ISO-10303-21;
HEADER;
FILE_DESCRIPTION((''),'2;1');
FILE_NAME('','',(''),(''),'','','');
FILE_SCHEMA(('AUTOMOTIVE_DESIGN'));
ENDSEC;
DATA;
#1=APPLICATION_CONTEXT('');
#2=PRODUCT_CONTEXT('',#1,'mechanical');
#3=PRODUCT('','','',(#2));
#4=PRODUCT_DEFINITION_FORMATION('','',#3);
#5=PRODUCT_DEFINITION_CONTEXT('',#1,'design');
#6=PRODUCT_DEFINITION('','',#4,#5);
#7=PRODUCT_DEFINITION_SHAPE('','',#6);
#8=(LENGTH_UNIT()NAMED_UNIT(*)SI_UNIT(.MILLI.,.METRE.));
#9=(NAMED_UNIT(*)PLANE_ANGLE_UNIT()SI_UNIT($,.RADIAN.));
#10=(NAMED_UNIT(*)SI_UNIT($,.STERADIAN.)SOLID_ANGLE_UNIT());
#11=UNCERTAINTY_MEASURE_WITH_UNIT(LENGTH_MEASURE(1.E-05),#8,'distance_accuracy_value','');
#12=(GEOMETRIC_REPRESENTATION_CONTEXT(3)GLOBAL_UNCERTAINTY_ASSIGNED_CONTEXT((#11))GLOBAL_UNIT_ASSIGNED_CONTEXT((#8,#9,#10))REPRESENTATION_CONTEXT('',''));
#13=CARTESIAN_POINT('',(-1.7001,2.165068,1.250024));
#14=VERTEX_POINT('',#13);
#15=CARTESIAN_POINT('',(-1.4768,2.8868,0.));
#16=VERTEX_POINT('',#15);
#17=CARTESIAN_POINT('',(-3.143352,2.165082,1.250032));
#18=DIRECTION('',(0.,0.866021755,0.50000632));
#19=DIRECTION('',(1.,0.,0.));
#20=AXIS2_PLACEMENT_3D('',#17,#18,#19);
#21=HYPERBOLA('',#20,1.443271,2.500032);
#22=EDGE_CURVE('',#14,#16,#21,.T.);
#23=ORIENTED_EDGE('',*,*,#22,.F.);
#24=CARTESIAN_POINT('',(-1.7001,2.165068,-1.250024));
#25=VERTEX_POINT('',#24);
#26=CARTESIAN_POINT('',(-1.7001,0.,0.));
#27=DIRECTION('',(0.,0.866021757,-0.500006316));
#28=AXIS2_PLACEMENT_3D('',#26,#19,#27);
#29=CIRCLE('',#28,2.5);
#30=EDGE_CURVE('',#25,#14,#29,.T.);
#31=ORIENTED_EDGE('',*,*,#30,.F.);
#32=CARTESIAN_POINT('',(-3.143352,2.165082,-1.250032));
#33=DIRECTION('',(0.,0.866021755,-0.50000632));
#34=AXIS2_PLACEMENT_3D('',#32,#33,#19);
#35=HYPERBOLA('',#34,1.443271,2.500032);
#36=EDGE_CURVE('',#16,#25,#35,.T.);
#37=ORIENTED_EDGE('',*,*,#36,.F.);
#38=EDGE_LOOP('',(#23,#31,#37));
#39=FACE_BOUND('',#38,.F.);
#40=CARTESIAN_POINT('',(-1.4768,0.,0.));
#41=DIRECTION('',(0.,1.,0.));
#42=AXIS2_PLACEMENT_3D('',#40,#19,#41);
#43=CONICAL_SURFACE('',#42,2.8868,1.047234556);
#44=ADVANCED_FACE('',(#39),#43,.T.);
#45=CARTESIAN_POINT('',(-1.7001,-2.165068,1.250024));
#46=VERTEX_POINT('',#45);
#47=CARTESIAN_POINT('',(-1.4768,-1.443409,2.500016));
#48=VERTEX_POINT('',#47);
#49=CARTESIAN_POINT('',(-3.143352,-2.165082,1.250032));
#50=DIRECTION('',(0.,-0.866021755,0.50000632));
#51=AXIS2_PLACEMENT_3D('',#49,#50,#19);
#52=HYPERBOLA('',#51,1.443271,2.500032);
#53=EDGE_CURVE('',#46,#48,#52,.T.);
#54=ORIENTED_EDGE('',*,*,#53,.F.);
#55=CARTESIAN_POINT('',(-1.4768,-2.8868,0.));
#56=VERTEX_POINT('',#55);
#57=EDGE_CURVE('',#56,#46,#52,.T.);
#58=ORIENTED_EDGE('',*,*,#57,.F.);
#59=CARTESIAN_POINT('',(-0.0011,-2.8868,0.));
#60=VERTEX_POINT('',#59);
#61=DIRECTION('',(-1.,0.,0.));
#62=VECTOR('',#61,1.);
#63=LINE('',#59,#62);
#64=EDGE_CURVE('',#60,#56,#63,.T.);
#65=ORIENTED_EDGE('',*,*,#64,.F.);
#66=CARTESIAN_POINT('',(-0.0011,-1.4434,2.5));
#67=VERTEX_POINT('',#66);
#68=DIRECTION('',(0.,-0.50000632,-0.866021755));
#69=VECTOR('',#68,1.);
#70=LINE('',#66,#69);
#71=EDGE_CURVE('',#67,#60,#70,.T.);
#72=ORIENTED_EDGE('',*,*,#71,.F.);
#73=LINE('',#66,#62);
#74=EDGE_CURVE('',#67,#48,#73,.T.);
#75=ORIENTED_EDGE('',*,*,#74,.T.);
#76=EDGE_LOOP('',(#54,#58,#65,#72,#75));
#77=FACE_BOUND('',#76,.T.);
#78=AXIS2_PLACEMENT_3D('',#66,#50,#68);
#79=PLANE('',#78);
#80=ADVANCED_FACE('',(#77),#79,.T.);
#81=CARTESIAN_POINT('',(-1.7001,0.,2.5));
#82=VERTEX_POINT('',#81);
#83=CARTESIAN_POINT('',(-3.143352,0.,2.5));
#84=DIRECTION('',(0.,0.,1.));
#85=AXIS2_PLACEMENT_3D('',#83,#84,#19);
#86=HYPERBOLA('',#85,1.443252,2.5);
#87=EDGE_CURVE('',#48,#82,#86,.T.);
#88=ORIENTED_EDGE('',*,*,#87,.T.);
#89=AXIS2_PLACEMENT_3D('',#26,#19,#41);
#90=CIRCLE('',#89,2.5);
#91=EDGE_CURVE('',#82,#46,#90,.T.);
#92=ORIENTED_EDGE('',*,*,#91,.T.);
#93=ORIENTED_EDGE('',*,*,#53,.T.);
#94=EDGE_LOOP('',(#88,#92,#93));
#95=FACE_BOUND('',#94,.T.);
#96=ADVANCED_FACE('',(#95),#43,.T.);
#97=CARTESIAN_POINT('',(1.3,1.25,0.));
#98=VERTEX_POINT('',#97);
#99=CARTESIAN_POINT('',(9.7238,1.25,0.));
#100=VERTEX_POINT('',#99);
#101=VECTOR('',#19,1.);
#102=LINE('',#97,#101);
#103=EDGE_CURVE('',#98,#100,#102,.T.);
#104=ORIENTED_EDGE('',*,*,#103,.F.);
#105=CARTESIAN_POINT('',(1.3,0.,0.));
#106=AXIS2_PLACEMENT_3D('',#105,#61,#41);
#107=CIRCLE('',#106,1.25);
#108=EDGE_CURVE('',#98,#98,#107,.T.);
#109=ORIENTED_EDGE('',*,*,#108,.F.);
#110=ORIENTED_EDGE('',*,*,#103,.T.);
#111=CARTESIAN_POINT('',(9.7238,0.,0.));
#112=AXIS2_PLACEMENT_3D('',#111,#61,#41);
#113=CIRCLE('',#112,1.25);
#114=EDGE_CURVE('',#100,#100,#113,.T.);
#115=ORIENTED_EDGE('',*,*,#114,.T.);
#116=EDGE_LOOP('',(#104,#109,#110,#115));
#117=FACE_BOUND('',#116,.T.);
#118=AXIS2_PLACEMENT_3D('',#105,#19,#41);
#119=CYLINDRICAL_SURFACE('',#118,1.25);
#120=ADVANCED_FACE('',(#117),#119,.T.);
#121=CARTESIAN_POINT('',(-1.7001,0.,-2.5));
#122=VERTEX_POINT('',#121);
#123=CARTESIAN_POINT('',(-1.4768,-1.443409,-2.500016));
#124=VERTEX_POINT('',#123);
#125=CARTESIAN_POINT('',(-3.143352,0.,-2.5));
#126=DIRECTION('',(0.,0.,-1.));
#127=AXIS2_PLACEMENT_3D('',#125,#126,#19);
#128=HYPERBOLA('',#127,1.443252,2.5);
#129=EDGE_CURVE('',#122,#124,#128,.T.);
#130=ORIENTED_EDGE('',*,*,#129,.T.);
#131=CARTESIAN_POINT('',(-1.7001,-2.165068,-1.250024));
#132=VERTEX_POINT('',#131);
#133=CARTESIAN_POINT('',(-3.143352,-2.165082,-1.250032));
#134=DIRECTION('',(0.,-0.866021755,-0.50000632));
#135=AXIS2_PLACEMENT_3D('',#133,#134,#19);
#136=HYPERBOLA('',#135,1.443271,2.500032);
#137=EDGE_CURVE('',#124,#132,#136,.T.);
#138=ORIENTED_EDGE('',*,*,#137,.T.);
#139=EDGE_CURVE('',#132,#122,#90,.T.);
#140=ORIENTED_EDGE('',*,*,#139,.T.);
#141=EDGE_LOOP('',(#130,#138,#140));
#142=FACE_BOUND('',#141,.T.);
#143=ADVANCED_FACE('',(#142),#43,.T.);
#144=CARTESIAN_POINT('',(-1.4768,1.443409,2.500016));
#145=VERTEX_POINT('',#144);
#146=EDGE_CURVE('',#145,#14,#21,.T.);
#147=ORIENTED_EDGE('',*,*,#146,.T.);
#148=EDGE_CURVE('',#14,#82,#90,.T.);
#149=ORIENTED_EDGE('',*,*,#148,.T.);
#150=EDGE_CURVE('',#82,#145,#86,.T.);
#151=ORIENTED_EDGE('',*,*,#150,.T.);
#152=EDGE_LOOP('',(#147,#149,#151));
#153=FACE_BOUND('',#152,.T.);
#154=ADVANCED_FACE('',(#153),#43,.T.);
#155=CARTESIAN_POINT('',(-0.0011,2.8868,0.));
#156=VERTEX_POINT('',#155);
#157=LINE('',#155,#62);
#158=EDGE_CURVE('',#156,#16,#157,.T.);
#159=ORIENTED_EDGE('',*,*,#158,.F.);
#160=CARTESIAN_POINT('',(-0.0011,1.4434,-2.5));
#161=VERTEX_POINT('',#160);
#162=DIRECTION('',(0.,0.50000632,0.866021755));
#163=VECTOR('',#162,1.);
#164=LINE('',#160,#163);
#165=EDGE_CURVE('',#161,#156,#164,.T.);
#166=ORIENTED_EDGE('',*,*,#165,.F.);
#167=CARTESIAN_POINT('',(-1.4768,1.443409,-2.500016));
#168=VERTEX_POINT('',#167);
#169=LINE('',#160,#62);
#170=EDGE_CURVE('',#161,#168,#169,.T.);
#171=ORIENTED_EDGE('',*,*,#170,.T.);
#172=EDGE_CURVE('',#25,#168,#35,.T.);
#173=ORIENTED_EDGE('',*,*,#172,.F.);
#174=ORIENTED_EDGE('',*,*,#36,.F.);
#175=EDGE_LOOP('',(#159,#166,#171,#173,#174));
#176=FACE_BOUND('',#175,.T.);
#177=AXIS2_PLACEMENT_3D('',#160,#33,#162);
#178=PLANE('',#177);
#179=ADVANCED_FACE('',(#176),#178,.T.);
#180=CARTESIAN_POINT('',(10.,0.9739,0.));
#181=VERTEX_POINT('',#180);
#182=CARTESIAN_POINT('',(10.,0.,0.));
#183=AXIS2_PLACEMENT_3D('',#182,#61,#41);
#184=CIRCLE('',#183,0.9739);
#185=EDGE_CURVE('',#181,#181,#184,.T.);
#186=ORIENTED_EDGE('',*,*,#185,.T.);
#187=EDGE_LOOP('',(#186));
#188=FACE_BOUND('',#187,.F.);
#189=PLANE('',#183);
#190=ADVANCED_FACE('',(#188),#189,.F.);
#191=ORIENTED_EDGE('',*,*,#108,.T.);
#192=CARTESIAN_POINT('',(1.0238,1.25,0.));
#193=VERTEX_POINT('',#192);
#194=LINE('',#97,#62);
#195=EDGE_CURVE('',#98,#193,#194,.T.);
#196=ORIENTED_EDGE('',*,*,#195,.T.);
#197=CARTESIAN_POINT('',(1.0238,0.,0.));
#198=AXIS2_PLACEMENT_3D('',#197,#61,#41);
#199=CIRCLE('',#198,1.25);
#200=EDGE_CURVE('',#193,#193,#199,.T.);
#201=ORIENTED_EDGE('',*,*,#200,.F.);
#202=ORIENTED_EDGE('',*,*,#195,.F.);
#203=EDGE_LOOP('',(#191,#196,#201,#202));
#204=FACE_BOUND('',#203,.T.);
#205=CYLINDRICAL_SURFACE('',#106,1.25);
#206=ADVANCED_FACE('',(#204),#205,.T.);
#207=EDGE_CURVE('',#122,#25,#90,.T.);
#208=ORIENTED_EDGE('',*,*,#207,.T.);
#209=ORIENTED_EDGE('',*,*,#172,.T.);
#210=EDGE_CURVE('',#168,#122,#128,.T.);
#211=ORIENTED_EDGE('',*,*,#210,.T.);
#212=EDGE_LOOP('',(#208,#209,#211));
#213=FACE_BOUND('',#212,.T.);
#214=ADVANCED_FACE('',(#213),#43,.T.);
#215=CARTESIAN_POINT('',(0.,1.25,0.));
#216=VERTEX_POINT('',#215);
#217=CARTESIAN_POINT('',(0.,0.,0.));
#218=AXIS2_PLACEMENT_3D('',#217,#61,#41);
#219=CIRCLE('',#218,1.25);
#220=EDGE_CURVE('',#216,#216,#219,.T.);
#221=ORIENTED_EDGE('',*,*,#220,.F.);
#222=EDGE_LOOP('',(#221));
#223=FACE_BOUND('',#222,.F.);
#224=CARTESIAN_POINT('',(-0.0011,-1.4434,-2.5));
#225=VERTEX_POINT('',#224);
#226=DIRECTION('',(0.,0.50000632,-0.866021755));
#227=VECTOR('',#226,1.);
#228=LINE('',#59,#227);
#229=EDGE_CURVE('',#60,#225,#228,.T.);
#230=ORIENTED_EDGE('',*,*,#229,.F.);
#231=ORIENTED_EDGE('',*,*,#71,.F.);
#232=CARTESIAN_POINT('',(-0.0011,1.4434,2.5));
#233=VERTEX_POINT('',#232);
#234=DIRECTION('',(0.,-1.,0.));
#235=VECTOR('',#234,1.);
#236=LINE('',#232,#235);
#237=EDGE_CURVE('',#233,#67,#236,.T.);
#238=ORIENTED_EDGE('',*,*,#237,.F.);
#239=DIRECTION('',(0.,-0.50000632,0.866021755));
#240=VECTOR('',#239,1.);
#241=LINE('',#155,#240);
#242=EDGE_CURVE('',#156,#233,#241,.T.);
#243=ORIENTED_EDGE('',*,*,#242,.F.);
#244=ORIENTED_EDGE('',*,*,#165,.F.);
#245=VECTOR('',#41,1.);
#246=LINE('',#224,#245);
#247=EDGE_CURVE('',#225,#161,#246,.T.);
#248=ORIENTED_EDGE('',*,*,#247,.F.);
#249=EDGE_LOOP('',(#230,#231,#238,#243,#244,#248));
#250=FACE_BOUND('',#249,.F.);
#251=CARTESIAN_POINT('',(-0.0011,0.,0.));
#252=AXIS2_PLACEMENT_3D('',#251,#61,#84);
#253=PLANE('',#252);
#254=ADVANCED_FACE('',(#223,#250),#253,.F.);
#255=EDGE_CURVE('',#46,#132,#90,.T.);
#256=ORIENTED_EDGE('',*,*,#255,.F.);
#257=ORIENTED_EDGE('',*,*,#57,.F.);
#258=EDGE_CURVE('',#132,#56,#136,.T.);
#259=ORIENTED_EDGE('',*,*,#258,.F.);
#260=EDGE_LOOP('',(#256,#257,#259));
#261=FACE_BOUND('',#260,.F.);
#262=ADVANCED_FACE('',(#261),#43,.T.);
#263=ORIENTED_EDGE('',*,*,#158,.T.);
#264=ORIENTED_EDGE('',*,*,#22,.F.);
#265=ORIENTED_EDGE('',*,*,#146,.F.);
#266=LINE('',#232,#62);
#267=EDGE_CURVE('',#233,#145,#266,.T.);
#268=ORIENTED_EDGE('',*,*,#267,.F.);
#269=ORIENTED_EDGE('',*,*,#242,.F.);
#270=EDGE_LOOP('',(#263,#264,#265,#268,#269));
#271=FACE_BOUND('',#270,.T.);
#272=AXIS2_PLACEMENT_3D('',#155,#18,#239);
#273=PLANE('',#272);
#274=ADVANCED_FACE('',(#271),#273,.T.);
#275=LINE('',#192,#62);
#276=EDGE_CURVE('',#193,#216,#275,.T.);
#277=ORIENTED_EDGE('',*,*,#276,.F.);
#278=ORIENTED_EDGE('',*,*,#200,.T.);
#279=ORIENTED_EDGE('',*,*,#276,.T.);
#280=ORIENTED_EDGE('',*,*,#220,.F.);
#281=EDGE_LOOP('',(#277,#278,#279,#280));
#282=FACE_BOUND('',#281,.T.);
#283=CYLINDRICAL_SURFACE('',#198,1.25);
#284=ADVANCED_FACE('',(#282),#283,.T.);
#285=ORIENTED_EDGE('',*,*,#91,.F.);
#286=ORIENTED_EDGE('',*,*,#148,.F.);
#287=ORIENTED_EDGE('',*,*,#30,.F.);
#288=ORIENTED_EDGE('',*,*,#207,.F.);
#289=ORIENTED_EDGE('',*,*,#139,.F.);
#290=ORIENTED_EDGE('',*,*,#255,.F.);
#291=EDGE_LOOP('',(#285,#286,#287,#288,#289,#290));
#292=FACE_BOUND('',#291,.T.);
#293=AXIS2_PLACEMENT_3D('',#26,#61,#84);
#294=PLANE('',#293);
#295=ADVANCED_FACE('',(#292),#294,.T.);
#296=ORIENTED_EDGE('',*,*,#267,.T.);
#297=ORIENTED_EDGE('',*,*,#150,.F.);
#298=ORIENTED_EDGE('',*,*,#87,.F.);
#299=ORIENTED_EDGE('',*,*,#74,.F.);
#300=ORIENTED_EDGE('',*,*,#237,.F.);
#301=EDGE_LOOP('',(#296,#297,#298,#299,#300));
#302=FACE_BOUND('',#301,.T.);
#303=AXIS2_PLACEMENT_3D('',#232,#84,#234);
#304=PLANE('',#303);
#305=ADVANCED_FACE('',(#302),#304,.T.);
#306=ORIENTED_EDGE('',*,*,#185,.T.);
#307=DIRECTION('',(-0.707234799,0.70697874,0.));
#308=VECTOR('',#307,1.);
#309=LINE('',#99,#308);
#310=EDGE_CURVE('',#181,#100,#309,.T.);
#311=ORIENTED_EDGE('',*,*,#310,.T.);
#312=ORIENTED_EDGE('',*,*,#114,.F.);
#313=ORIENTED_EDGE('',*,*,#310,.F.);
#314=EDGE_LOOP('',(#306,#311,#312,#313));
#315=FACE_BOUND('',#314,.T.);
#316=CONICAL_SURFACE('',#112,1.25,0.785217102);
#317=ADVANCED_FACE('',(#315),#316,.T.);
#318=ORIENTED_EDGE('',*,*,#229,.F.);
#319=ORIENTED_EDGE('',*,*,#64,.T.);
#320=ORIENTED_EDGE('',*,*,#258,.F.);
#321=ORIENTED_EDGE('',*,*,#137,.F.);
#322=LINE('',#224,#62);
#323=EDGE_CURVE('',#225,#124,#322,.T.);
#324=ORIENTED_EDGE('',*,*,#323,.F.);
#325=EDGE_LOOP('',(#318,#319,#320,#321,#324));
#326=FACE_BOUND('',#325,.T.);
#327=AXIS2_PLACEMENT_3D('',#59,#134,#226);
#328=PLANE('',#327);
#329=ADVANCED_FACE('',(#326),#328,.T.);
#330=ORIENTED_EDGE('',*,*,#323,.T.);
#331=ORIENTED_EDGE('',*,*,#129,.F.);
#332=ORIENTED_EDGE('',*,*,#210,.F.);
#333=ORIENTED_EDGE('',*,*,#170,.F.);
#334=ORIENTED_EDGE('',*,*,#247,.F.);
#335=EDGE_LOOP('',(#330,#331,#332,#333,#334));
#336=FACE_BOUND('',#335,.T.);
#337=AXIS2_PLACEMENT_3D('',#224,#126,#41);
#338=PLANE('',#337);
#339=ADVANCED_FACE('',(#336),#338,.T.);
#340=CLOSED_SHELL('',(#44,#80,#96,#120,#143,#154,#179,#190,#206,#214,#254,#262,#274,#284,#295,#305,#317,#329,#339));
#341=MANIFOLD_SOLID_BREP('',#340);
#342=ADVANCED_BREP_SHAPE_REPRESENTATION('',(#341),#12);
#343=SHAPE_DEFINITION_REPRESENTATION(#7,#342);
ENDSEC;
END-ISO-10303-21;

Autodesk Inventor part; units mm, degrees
ref_plane "YZ Plane" through (0, 0, 0) normal (1, 0, 0) x (0, 1, 0)
ref_plane "XZ Plane" through (0, 0, 0) normal (0, 1, 0) x (-1, 0, 0)
sketch "Boceto1" plane through (0, 0, 0) normal (0, 0, 1) x (1, 0, 0)
  line L0 (0, 2.5) -> (0, 1.25)
  line L1 (1.3, 1.25) -> (10, 1.25)
  line L2 (10, 1.25) -> (10, 0)
  line L3 (10, 0) -> (-0.0011, 0)
  line L4 (-2.0013, 0) -> (12.0002, 0) projected
  line L5 (-0.0011, 0) -> (-0.0011, 2.5)
  line L6 (-0.0011, 2.5) -> (0, 2.5)
  line L7 (1.3, 1.25) -> (1.0238, 1.25)
  line L8 (1.0238, 1.25) -> (0, 1.25)
  line L9 (0, -0.5) -> (0, 3) projected
  dimension "d0" = 10
  dimension "d1" = 8.7
  dimension "d2" = 2.5
  dimension "d9" = 0.0011
  dimension "d10" = 5
  dimension "d13" = 0.2762
  dimension "d14" = 2.5
revolve "Cuerpo" add sketch "Boceto1" angle 360 about axis through (10, 0, 0) along (-1, 0, 0)
sketch "Boceto2" plane through (-0.0011, 0, 0) normal (-1, 0, 0) x (0, 0, 1)
  line L0 (0, 2.8868) -> (2.5, 1.4434)
  line L1 (2.5, 1.4434) -> (2.5, -1.4434)
  line L2 (2.5, -1.4434) -> (0, -2.8868)
  line L3 (0, -2.8868) -> (-2.5, -1.4434)
  line L4 (-2.5, -1.4434) -> (-2.5, 1.4434)
  line L5 (-2.5, 1.4434) -> (0, 2.8868)
  point P0 (0, 0)
  point P1 (0, 0)
  dimension "d11" = 5
extrude "Cabeza" add sketch "Boceto2" along normal blind 1.699
sketch "Boceto4" plane through (0, 0, 0) normal (0, 0, 1) x (1, 0, 0)
  line L0 (-1.7001, 2.5) -> (-1.7001, 2.8868)
  line L1 (-1.7001, 2.8868) -> (-1.4768, 2.8868)
  line L2 (-1.4768, 2.8868) -> (-1.7001, 2.5)
  line L3 (-2.0399, 0) -> (0.3387, 0) projected
  line L4 (-0.0011, 2.8868) -> (-1.7001, 2.8868) projected
  line L5 (-1.7001, 1.4434) -> (-1.7001, 2.8868) projected
  dimension "d5" = 30
  dimension "d19" = 5
revolve "Chaflán1" cut sketch "Boceto4" angle 360 about axis through (-10, 0, 0) along (1, 0, 0)
thread "Rosca" size "M2.5x0.45" class "6g" standard "ISO Metric profile" length 8.7
chamfer "Chaflán2" distance 0.2761 distance2 0.2762 1 edges at (10, -1.25, 0) measured on face at (10, -0.674, 0.4136)
ref_plane "Work Plane1" through (1.525, 0, 0) normal (0, 0, 1) x (1, 0, 0)
equation "\"d0\" = NLG"
equation "\"d1\" = GEL"
equation "\"d2\" = GD"
equation "\"d10\" = SD2"
equation "\"d14\" = BDM"
equation "\"d11\" = SW"
equation "\"d3\" = KOH - SD"
equation "\"d5\" = ANG1"
equation "\"d19\" = SW0"
equation "\"d15\" = GEL"
equation "\"d6\" = -0.5 * SPD + 0.5 * GD"
equation "\"NLG\" = 10"
equation "\"GD\" = NND"
equation "\"BDM\" = NND"
equation "\"KOH\" = 1.7"
equation "\"GEL\" = 8.7"
equation "\"SW\" = 5"
equation "\"SW0\" = SW"
equation "\"SPD\" = NND - 1.2269 * PTC"
equation "\"SD2\" = SW"
equation "\"SD\" = 0.001"
equation "\"ANG1\" = 30deg"
equation "\"GAL\" = 0.61345 * PTC"
equation "\"GUL\" = 0.61345 * PTC"
equation "\"RR\" = 0.001"
equation "\"WFT\" = SD"
equation "\"GD1\" = THREADDIA - 1.2269 * PTC"
equation "\"THREADDIA\" = 2.5"
equation "\"SDH\" = SW"
equation "\"TOA\" = 30deg"
equation "\"FAWI\" = 45deg"
equation "\"PTC\" = 0.45"
equation "\"NND\" = 2.5"
equation "\"E0\" = 1.155 * SW"
properties part number "AS 1110 - M2,5 x 10" material "Acero, suave"
